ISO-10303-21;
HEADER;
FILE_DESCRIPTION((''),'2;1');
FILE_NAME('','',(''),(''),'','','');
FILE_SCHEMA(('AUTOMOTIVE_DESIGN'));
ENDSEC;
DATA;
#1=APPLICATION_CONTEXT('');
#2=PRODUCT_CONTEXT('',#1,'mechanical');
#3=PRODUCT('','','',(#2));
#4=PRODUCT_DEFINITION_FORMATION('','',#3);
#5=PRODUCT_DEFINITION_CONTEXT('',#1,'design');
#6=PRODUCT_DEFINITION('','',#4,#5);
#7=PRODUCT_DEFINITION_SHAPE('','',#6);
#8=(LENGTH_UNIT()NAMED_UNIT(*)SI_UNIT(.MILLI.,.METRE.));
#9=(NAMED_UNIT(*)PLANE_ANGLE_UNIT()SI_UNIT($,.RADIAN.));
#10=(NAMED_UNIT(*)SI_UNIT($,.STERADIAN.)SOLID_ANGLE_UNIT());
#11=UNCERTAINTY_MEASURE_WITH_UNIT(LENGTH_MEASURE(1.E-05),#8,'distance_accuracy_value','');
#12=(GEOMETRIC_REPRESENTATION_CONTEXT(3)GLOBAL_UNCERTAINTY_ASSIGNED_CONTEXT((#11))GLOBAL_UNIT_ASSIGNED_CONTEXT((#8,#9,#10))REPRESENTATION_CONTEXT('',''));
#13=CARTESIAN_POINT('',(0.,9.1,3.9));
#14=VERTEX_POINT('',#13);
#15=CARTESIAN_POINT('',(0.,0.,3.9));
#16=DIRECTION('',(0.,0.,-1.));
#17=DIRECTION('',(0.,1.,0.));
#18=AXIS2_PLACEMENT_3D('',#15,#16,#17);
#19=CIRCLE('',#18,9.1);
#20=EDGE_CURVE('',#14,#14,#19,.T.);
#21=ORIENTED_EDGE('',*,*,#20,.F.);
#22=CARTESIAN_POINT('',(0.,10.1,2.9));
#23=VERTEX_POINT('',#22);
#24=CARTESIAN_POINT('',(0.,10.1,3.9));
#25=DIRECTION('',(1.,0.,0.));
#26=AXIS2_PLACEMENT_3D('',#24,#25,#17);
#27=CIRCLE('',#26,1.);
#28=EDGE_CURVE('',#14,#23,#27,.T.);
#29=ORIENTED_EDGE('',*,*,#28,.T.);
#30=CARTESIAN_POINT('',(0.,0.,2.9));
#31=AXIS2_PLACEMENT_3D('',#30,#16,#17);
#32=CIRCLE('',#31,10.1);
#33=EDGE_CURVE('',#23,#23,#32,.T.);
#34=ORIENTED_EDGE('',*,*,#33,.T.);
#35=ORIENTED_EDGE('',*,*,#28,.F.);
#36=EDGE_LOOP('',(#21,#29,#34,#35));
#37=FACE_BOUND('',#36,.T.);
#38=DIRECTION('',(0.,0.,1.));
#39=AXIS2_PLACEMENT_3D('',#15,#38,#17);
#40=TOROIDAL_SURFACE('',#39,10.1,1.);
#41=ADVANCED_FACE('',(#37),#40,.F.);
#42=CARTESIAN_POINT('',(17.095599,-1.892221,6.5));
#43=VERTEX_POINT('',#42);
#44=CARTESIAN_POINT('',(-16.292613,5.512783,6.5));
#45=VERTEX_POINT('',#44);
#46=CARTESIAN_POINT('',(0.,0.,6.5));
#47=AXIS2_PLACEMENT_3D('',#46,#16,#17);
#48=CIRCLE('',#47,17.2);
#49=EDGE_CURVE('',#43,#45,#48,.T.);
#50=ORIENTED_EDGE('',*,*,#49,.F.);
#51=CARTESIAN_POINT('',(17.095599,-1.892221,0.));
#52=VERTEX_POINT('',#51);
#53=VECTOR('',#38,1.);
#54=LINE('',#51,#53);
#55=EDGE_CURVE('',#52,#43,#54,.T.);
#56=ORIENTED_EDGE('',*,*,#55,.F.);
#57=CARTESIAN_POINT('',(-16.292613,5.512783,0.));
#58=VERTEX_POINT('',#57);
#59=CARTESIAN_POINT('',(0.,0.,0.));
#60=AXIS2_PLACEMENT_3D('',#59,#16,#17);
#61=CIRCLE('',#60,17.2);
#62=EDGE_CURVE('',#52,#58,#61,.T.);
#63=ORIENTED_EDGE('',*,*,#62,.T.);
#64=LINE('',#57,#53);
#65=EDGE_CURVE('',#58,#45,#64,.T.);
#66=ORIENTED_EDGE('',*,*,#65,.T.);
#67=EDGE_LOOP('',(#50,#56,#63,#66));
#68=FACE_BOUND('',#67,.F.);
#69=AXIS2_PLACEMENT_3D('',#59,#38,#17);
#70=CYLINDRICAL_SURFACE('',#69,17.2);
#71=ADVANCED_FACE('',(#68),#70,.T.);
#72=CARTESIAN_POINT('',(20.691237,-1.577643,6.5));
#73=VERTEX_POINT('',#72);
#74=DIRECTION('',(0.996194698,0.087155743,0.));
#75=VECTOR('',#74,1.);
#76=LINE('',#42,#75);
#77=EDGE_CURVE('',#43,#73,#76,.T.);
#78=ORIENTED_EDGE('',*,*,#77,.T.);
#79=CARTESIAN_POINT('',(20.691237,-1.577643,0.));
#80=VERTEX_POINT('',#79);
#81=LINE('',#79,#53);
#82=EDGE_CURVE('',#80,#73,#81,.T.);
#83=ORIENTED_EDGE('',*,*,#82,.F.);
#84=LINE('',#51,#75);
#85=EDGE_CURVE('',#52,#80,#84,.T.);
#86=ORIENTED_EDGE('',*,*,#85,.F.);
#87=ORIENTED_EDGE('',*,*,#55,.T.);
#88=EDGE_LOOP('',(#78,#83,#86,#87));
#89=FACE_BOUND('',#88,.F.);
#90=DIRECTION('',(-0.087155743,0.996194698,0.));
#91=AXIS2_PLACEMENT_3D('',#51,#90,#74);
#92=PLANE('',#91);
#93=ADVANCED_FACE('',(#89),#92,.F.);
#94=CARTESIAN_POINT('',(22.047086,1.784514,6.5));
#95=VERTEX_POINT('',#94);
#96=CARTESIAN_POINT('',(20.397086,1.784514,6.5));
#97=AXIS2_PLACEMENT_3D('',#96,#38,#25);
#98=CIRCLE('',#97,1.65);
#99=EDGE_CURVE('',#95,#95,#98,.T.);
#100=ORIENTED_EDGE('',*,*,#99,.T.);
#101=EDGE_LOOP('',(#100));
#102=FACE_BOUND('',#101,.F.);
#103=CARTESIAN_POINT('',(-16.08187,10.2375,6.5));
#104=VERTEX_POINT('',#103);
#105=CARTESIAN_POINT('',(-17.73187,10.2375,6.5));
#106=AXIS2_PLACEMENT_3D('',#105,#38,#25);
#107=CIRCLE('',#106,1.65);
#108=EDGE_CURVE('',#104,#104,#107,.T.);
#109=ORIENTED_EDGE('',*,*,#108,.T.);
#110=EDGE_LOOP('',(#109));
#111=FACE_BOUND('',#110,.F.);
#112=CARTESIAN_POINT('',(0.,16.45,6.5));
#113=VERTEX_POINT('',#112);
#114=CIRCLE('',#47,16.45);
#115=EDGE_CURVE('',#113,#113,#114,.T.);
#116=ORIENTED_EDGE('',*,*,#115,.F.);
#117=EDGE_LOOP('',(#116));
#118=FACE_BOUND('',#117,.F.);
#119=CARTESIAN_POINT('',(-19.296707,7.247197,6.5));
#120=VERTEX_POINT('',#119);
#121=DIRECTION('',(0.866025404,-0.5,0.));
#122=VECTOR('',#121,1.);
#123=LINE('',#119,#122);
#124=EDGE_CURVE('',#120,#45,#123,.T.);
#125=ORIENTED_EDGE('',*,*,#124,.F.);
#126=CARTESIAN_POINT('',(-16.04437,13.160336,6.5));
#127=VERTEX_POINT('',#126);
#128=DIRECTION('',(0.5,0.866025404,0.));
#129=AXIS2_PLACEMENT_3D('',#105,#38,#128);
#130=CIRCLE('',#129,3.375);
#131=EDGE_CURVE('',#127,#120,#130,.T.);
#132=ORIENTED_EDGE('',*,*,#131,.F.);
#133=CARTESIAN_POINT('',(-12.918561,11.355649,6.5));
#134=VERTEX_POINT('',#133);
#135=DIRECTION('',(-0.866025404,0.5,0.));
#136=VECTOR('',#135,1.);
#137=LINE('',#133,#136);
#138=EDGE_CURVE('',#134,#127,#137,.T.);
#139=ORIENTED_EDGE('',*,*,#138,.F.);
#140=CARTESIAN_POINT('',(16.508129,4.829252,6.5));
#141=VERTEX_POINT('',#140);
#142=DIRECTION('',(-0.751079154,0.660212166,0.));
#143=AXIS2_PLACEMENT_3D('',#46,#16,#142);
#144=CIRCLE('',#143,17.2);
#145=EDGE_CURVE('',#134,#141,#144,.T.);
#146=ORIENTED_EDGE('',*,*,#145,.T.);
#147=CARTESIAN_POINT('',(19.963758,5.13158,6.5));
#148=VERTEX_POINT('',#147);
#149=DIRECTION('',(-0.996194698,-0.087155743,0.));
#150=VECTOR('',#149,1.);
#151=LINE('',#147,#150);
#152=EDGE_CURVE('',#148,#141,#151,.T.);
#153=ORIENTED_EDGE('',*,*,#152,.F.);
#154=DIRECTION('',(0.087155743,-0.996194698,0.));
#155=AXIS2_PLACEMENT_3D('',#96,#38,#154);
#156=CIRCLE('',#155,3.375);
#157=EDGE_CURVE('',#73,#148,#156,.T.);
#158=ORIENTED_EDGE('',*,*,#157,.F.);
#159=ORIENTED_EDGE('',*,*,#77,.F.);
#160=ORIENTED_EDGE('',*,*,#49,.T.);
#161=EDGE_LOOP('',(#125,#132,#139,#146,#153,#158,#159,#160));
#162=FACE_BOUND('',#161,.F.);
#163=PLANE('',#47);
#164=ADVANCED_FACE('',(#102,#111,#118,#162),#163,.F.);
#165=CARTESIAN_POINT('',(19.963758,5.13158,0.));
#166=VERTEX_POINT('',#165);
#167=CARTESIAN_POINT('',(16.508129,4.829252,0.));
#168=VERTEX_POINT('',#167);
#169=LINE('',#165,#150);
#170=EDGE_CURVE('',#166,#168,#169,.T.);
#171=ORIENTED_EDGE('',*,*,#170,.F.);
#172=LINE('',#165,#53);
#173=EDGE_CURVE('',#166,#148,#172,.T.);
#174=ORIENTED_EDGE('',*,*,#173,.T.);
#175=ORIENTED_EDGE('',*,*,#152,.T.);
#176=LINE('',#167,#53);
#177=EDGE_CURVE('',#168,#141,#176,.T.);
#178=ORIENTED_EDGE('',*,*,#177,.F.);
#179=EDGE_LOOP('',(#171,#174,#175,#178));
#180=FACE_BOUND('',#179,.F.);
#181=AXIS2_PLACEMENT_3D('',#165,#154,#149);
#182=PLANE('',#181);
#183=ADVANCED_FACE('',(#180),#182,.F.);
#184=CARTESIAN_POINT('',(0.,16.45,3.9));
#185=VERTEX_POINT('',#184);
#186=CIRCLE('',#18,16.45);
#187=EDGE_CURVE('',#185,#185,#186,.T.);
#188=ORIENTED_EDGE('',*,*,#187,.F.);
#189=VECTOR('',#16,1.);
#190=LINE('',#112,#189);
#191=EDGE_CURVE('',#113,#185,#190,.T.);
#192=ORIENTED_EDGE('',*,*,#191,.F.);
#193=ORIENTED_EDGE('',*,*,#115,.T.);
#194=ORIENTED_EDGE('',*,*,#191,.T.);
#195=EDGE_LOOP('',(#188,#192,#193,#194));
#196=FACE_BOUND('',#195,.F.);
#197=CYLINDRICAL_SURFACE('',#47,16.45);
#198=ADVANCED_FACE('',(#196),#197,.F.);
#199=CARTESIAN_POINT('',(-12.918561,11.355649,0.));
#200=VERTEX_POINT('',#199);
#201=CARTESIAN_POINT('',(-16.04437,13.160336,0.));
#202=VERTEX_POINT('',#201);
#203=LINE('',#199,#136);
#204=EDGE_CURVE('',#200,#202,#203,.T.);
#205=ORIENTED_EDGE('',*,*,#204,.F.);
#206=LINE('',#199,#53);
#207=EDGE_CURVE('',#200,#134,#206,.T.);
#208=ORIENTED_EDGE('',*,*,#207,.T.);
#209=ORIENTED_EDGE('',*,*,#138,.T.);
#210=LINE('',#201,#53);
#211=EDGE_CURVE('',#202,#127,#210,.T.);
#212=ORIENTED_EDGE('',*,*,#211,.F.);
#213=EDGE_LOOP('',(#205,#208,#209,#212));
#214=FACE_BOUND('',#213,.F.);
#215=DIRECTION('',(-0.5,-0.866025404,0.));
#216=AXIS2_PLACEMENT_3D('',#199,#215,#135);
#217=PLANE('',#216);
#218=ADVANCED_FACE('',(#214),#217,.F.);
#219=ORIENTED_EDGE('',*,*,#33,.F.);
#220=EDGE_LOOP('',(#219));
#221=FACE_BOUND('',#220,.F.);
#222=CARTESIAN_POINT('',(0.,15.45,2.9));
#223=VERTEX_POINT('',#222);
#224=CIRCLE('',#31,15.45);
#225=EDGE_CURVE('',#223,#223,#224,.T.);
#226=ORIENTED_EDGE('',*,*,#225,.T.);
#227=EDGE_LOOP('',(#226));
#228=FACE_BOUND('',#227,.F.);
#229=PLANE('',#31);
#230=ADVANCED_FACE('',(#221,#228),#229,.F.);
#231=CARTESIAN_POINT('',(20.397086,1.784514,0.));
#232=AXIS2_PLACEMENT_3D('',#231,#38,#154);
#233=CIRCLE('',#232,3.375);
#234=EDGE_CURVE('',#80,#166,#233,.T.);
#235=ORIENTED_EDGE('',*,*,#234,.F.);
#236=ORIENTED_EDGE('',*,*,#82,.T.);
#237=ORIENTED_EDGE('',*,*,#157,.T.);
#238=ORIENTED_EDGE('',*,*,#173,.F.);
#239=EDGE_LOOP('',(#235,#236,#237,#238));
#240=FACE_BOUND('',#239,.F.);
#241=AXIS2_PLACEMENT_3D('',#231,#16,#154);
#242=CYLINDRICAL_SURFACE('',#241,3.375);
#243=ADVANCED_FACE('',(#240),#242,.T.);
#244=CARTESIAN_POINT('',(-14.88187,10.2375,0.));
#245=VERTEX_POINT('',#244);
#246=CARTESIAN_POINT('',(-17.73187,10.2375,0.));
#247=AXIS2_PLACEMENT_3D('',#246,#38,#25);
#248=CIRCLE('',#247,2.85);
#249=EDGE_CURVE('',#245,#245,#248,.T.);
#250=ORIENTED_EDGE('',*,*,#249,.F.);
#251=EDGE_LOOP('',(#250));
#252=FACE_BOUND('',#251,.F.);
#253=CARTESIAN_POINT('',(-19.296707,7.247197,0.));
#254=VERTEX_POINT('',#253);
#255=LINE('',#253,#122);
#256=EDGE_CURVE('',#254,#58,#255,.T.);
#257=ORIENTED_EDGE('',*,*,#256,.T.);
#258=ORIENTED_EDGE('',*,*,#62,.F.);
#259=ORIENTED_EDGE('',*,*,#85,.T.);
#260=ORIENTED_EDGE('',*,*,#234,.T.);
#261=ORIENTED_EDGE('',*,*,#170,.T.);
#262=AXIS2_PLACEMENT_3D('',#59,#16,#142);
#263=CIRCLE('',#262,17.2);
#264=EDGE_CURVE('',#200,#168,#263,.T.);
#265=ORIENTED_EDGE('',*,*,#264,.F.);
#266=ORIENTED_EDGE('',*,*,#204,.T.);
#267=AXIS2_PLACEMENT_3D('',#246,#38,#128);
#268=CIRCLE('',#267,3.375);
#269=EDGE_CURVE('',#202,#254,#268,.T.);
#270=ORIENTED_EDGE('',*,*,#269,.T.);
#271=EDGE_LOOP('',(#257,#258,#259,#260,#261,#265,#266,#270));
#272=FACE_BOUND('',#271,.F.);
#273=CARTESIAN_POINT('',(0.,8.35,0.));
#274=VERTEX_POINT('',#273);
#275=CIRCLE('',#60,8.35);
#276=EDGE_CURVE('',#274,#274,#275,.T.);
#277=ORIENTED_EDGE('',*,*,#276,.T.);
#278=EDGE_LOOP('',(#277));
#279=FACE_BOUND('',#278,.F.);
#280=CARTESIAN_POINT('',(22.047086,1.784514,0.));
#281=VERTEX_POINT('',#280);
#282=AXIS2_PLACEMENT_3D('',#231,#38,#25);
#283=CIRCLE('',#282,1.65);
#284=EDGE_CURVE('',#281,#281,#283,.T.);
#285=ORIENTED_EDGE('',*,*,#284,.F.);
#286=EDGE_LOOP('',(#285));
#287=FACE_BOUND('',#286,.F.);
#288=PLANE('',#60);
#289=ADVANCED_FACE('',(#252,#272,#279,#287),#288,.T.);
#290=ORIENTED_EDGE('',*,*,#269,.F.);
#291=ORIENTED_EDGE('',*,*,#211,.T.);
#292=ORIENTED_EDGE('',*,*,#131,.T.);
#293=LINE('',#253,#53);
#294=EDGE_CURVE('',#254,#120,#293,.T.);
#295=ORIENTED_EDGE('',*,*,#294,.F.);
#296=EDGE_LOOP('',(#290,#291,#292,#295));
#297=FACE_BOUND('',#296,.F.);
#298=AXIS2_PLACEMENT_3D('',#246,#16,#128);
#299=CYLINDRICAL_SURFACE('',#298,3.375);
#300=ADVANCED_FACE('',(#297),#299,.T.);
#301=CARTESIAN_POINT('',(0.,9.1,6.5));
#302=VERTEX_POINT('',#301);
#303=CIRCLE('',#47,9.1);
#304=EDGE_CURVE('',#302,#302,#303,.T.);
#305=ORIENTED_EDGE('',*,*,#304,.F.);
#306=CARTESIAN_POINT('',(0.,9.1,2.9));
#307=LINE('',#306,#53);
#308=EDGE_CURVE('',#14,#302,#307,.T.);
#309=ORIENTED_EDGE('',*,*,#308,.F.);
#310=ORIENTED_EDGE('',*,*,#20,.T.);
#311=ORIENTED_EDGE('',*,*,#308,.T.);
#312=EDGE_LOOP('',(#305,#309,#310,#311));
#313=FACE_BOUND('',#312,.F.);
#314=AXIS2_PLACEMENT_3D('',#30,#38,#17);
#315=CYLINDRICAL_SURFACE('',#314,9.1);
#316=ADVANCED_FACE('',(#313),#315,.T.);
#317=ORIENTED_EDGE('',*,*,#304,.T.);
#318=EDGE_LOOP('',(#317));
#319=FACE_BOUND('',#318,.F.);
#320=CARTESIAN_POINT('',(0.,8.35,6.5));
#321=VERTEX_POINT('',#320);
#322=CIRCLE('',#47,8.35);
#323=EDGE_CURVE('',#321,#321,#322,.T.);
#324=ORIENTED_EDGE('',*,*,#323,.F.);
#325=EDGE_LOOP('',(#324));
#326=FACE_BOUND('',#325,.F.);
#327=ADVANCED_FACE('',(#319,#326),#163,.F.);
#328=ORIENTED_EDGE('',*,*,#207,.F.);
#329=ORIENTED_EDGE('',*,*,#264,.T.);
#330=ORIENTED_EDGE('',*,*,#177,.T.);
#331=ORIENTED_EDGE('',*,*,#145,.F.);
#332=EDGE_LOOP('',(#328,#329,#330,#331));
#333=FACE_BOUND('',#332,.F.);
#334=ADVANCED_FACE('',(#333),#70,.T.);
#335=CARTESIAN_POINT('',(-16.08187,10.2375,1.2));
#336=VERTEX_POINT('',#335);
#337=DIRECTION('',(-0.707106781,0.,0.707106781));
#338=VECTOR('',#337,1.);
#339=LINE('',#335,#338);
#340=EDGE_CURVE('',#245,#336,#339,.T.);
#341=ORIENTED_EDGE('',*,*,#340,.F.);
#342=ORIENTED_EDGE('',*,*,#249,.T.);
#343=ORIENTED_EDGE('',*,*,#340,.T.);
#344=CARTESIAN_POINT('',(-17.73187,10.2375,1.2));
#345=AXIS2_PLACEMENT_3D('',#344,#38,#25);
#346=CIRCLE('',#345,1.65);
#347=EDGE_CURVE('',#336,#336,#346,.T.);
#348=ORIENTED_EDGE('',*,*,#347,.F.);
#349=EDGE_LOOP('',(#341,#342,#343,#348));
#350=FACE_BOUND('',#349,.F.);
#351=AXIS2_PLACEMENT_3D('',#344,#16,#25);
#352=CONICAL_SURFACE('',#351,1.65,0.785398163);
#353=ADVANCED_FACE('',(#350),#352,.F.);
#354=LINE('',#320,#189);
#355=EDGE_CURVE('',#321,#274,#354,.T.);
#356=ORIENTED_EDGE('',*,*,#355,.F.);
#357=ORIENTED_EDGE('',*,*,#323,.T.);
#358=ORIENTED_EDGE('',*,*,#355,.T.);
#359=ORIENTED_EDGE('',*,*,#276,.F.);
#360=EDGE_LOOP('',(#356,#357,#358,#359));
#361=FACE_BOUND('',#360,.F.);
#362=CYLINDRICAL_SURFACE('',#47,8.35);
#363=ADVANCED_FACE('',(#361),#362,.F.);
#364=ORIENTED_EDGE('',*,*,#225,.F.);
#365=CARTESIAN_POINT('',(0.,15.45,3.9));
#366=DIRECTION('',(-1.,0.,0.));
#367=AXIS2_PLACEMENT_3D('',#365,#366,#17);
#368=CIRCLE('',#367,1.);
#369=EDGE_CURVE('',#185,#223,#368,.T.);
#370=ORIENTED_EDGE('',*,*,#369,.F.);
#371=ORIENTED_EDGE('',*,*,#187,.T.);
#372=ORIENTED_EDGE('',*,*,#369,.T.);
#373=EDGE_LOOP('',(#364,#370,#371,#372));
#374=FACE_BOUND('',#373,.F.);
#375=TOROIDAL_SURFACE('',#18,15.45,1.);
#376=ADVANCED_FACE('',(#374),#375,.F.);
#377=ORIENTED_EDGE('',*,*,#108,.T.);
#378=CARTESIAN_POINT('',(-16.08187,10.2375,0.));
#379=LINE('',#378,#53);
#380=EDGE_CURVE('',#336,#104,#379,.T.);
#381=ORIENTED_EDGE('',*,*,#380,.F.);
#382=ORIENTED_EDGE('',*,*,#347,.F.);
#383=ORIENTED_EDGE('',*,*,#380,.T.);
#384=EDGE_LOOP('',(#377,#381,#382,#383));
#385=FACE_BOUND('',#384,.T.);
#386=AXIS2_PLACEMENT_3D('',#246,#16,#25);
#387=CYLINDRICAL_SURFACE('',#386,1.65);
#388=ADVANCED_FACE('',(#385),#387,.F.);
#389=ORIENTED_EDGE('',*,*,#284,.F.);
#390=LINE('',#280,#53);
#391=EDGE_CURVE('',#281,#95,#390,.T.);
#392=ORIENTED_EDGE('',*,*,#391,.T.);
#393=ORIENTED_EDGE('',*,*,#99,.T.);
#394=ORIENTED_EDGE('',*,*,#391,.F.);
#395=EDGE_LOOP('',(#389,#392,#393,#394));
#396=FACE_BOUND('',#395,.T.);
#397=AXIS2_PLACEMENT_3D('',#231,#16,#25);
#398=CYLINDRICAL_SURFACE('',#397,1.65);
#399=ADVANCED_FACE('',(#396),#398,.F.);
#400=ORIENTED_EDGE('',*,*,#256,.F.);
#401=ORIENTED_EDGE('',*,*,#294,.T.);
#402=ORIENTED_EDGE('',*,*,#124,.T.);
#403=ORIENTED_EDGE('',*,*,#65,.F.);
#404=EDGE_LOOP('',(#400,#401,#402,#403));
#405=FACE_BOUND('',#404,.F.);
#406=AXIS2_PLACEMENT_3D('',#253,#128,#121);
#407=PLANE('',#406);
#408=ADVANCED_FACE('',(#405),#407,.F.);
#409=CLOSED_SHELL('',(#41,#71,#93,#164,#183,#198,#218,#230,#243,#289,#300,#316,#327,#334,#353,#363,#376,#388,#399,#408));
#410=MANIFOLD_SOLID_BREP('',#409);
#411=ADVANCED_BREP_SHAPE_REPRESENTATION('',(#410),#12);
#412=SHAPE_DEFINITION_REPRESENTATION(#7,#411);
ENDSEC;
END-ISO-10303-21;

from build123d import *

# Parameters (mm, degrees)
F2_R     = 1.65
F3_DEPTH = 6.5
F4_SIZE  = 1.2
F5_R     = 1


# Not quite as in the source:
# - a feature names something its author has since deleted; it is built from what else it names


with BuildPart() as f1:
    # F0 (on Right) → F1 (revolve)
    with BuildSketch(Plane.YZ):
        Polygon((8.35, 0), (17.2, 0), (17.2, 6.5), (16.45, 6.5), (16.45, 2.9), (9.1, 2.9), (9.1, 6.5), (8.35, 6.5), align=None)
    revolve(axis=Axis((0, 0, -2.445915569), (0, 0, -1)))

    # F2 (on Top) → F3 (join, through all)
    with BuildSketch(Plane.XY):
        with BuildLine():
            Line((-12.9185614558, 11.3556492511), (-16.0443701425, 13.1603357378))
            ThreePointArc((-16.0443701425, 13.1603357378), (-20.6890755738, 11.8640180715), (-19.2967065825, 7.2471970193))
            Line((-19.2967065825, 7.2471970193), (-16.2926126828, 5.5127825977))
            ThreePointArc((-16.2926126828, 5.5127825977), (-14.8948966536, 8.6012820951), (-12.9185614558, 11.3556492511))
        make_face()
        with Locations((-17.7318701425, 10.2375)):
            Circle(F2_R, mode=Mode.SUBTRACT)
        with BuildLine():
            ThreePointArc((16.5081291827, 4.8292515868), (17.1346777754, 1.4976039307), (17.0955988557, -1.8922208557))
            Line((17.0955988557, -1.8922208557), (20.6912370752, -1.5776432733))
            ThreePointArc((20.6912370752, -1.5776432733), (23.752419757, 2.1483315823), (19.9637580849, 5.1315799411))
            Line((19.9637580849, 5.1315799411), (16.5081291827, 4.8292515868))
        make_face()
        with Locations((20.3970864434, 1.7845138328)):
            Circle(F2_R, mode=Mode.SUBTRACT)
    extrude(amount=F3_DEPTH)

    # F4
    f4_edges = [f1.edges().sort_by_distance(p)[0] for p in [
        (-19.38187, 10.2375, 0),
    ]]
    chamfer(f4_edges, length=F4_SIZE)

    # F5
    f5_edges = [f1.edges().sort_by_distance(p)[0] for p in [
        (0, -16.45, 2.9),
        (0, -9.1, 2.9),
    ]]
    fillet(f5_edges, radius=F5_R)


solid = f1.part
